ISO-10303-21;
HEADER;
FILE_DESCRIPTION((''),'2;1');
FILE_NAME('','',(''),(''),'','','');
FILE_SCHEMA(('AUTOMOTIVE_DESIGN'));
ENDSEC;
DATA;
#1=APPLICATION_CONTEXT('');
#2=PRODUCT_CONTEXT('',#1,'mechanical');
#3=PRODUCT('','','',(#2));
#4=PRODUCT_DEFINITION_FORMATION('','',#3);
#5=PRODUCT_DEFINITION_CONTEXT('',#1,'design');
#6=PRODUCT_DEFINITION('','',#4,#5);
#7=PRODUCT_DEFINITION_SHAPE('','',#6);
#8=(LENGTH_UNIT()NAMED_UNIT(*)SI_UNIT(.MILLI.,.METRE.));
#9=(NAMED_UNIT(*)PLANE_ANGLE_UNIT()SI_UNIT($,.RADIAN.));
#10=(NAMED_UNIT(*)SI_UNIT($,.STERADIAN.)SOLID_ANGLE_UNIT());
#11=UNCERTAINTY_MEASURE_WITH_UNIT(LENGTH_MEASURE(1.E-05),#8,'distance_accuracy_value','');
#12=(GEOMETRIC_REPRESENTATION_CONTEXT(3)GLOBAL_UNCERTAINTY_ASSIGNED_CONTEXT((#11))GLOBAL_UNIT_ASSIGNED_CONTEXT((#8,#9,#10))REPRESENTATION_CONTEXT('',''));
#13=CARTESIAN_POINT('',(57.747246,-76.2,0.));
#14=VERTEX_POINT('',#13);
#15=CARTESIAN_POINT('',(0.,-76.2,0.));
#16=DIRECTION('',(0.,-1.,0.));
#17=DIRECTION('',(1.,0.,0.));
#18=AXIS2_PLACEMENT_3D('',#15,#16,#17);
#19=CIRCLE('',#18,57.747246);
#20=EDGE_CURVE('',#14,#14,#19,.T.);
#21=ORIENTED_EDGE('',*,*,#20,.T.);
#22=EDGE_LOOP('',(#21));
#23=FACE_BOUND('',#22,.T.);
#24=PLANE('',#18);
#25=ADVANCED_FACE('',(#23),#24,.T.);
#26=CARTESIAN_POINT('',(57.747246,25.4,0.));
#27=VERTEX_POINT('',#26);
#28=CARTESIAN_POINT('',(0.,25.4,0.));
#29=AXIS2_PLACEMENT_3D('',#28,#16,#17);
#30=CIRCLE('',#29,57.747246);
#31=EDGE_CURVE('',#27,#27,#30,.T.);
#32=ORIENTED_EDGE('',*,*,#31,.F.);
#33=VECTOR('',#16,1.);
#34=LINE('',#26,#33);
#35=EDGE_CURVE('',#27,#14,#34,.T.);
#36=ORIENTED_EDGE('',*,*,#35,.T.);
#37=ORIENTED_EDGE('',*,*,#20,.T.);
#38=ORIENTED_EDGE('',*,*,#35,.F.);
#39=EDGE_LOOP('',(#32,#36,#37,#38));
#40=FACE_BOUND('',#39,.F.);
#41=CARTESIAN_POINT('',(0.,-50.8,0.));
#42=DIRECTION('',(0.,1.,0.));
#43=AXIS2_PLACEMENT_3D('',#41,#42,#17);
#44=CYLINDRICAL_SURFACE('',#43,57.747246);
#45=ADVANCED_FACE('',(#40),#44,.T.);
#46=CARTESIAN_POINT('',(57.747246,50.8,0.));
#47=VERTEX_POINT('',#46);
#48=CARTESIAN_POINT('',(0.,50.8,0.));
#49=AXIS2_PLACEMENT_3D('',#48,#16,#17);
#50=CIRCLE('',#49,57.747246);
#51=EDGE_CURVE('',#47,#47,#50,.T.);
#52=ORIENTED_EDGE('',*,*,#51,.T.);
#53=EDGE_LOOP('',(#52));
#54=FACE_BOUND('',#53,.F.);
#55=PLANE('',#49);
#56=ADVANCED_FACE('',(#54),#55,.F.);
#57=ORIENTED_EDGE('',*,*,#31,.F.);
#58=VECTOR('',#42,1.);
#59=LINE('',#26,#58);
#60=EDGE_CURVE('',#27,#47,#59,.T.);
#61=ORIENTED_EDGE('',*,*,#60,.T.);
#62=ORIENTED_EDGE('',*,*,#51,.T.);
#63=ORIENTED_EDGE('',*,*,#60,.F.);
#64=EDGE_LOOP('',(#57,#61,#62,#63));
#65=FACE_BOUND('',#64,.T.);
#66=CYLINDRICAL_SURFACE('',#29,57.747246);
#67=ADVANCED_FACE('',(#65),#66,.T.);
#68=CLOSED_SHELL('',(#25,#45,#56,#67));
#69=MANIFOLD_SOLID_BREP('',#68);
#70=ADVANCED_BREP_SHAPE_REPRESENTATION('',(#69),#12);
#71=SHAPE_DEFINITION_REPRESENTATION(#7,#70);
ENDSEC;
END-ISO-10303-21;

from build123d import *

# Parameters (mm, degrees)
F0_R     = 57.747245906
F1_DEPTH = 25.4
F2_DEPTH = 25.4
F3_DEPTH = 25.4
F4_DEPTH = 25.4
F7_DEPTH = 25.4


# Not quite as in the source:
# - the program builds the solid bodies; features that only make, move or delete a surface that nothing else refers to are left out


with BuildPart() as f1:
    # F0 (on Front) → F1 (new body)
    with BuildSketch(Plane.XZ):
        Circle(F0_R)
    extrude(amount=F1_DEPTH)

    # F2 (add): a face of the model
    f2_faces = [f1.faces().sort_by_distance(p)[0] for p in [
        (0, 0, 0),
    ]]
    extrude(f2_faces, amount=F2_DEPTH)

    # F3 (add): a face of the model
    f3_faces = [f1.faces().sort_by_distance(p)[0] for p in [
        (0, -25.4, 0),
    ]]
    extrude(f3_faces, amount=F3_DEPTH)

    # F4 (add): a face of the model
    f4_faces = [f1.faces().sort_by_distance(p)[0] for p in [
        (0, -50.8, 0),
    ]]
    extrude(f4_faces, amount=F4_DEPTH)

    # F7 (add): a face of the model
    f7_faces = [f1.faces().sort_by_distance(p)[0] for p in [
        (0, 25.4, 0),
    ]]
    extrude(f7_faces, amount=F7_DEPTH)


solid = f1.part
